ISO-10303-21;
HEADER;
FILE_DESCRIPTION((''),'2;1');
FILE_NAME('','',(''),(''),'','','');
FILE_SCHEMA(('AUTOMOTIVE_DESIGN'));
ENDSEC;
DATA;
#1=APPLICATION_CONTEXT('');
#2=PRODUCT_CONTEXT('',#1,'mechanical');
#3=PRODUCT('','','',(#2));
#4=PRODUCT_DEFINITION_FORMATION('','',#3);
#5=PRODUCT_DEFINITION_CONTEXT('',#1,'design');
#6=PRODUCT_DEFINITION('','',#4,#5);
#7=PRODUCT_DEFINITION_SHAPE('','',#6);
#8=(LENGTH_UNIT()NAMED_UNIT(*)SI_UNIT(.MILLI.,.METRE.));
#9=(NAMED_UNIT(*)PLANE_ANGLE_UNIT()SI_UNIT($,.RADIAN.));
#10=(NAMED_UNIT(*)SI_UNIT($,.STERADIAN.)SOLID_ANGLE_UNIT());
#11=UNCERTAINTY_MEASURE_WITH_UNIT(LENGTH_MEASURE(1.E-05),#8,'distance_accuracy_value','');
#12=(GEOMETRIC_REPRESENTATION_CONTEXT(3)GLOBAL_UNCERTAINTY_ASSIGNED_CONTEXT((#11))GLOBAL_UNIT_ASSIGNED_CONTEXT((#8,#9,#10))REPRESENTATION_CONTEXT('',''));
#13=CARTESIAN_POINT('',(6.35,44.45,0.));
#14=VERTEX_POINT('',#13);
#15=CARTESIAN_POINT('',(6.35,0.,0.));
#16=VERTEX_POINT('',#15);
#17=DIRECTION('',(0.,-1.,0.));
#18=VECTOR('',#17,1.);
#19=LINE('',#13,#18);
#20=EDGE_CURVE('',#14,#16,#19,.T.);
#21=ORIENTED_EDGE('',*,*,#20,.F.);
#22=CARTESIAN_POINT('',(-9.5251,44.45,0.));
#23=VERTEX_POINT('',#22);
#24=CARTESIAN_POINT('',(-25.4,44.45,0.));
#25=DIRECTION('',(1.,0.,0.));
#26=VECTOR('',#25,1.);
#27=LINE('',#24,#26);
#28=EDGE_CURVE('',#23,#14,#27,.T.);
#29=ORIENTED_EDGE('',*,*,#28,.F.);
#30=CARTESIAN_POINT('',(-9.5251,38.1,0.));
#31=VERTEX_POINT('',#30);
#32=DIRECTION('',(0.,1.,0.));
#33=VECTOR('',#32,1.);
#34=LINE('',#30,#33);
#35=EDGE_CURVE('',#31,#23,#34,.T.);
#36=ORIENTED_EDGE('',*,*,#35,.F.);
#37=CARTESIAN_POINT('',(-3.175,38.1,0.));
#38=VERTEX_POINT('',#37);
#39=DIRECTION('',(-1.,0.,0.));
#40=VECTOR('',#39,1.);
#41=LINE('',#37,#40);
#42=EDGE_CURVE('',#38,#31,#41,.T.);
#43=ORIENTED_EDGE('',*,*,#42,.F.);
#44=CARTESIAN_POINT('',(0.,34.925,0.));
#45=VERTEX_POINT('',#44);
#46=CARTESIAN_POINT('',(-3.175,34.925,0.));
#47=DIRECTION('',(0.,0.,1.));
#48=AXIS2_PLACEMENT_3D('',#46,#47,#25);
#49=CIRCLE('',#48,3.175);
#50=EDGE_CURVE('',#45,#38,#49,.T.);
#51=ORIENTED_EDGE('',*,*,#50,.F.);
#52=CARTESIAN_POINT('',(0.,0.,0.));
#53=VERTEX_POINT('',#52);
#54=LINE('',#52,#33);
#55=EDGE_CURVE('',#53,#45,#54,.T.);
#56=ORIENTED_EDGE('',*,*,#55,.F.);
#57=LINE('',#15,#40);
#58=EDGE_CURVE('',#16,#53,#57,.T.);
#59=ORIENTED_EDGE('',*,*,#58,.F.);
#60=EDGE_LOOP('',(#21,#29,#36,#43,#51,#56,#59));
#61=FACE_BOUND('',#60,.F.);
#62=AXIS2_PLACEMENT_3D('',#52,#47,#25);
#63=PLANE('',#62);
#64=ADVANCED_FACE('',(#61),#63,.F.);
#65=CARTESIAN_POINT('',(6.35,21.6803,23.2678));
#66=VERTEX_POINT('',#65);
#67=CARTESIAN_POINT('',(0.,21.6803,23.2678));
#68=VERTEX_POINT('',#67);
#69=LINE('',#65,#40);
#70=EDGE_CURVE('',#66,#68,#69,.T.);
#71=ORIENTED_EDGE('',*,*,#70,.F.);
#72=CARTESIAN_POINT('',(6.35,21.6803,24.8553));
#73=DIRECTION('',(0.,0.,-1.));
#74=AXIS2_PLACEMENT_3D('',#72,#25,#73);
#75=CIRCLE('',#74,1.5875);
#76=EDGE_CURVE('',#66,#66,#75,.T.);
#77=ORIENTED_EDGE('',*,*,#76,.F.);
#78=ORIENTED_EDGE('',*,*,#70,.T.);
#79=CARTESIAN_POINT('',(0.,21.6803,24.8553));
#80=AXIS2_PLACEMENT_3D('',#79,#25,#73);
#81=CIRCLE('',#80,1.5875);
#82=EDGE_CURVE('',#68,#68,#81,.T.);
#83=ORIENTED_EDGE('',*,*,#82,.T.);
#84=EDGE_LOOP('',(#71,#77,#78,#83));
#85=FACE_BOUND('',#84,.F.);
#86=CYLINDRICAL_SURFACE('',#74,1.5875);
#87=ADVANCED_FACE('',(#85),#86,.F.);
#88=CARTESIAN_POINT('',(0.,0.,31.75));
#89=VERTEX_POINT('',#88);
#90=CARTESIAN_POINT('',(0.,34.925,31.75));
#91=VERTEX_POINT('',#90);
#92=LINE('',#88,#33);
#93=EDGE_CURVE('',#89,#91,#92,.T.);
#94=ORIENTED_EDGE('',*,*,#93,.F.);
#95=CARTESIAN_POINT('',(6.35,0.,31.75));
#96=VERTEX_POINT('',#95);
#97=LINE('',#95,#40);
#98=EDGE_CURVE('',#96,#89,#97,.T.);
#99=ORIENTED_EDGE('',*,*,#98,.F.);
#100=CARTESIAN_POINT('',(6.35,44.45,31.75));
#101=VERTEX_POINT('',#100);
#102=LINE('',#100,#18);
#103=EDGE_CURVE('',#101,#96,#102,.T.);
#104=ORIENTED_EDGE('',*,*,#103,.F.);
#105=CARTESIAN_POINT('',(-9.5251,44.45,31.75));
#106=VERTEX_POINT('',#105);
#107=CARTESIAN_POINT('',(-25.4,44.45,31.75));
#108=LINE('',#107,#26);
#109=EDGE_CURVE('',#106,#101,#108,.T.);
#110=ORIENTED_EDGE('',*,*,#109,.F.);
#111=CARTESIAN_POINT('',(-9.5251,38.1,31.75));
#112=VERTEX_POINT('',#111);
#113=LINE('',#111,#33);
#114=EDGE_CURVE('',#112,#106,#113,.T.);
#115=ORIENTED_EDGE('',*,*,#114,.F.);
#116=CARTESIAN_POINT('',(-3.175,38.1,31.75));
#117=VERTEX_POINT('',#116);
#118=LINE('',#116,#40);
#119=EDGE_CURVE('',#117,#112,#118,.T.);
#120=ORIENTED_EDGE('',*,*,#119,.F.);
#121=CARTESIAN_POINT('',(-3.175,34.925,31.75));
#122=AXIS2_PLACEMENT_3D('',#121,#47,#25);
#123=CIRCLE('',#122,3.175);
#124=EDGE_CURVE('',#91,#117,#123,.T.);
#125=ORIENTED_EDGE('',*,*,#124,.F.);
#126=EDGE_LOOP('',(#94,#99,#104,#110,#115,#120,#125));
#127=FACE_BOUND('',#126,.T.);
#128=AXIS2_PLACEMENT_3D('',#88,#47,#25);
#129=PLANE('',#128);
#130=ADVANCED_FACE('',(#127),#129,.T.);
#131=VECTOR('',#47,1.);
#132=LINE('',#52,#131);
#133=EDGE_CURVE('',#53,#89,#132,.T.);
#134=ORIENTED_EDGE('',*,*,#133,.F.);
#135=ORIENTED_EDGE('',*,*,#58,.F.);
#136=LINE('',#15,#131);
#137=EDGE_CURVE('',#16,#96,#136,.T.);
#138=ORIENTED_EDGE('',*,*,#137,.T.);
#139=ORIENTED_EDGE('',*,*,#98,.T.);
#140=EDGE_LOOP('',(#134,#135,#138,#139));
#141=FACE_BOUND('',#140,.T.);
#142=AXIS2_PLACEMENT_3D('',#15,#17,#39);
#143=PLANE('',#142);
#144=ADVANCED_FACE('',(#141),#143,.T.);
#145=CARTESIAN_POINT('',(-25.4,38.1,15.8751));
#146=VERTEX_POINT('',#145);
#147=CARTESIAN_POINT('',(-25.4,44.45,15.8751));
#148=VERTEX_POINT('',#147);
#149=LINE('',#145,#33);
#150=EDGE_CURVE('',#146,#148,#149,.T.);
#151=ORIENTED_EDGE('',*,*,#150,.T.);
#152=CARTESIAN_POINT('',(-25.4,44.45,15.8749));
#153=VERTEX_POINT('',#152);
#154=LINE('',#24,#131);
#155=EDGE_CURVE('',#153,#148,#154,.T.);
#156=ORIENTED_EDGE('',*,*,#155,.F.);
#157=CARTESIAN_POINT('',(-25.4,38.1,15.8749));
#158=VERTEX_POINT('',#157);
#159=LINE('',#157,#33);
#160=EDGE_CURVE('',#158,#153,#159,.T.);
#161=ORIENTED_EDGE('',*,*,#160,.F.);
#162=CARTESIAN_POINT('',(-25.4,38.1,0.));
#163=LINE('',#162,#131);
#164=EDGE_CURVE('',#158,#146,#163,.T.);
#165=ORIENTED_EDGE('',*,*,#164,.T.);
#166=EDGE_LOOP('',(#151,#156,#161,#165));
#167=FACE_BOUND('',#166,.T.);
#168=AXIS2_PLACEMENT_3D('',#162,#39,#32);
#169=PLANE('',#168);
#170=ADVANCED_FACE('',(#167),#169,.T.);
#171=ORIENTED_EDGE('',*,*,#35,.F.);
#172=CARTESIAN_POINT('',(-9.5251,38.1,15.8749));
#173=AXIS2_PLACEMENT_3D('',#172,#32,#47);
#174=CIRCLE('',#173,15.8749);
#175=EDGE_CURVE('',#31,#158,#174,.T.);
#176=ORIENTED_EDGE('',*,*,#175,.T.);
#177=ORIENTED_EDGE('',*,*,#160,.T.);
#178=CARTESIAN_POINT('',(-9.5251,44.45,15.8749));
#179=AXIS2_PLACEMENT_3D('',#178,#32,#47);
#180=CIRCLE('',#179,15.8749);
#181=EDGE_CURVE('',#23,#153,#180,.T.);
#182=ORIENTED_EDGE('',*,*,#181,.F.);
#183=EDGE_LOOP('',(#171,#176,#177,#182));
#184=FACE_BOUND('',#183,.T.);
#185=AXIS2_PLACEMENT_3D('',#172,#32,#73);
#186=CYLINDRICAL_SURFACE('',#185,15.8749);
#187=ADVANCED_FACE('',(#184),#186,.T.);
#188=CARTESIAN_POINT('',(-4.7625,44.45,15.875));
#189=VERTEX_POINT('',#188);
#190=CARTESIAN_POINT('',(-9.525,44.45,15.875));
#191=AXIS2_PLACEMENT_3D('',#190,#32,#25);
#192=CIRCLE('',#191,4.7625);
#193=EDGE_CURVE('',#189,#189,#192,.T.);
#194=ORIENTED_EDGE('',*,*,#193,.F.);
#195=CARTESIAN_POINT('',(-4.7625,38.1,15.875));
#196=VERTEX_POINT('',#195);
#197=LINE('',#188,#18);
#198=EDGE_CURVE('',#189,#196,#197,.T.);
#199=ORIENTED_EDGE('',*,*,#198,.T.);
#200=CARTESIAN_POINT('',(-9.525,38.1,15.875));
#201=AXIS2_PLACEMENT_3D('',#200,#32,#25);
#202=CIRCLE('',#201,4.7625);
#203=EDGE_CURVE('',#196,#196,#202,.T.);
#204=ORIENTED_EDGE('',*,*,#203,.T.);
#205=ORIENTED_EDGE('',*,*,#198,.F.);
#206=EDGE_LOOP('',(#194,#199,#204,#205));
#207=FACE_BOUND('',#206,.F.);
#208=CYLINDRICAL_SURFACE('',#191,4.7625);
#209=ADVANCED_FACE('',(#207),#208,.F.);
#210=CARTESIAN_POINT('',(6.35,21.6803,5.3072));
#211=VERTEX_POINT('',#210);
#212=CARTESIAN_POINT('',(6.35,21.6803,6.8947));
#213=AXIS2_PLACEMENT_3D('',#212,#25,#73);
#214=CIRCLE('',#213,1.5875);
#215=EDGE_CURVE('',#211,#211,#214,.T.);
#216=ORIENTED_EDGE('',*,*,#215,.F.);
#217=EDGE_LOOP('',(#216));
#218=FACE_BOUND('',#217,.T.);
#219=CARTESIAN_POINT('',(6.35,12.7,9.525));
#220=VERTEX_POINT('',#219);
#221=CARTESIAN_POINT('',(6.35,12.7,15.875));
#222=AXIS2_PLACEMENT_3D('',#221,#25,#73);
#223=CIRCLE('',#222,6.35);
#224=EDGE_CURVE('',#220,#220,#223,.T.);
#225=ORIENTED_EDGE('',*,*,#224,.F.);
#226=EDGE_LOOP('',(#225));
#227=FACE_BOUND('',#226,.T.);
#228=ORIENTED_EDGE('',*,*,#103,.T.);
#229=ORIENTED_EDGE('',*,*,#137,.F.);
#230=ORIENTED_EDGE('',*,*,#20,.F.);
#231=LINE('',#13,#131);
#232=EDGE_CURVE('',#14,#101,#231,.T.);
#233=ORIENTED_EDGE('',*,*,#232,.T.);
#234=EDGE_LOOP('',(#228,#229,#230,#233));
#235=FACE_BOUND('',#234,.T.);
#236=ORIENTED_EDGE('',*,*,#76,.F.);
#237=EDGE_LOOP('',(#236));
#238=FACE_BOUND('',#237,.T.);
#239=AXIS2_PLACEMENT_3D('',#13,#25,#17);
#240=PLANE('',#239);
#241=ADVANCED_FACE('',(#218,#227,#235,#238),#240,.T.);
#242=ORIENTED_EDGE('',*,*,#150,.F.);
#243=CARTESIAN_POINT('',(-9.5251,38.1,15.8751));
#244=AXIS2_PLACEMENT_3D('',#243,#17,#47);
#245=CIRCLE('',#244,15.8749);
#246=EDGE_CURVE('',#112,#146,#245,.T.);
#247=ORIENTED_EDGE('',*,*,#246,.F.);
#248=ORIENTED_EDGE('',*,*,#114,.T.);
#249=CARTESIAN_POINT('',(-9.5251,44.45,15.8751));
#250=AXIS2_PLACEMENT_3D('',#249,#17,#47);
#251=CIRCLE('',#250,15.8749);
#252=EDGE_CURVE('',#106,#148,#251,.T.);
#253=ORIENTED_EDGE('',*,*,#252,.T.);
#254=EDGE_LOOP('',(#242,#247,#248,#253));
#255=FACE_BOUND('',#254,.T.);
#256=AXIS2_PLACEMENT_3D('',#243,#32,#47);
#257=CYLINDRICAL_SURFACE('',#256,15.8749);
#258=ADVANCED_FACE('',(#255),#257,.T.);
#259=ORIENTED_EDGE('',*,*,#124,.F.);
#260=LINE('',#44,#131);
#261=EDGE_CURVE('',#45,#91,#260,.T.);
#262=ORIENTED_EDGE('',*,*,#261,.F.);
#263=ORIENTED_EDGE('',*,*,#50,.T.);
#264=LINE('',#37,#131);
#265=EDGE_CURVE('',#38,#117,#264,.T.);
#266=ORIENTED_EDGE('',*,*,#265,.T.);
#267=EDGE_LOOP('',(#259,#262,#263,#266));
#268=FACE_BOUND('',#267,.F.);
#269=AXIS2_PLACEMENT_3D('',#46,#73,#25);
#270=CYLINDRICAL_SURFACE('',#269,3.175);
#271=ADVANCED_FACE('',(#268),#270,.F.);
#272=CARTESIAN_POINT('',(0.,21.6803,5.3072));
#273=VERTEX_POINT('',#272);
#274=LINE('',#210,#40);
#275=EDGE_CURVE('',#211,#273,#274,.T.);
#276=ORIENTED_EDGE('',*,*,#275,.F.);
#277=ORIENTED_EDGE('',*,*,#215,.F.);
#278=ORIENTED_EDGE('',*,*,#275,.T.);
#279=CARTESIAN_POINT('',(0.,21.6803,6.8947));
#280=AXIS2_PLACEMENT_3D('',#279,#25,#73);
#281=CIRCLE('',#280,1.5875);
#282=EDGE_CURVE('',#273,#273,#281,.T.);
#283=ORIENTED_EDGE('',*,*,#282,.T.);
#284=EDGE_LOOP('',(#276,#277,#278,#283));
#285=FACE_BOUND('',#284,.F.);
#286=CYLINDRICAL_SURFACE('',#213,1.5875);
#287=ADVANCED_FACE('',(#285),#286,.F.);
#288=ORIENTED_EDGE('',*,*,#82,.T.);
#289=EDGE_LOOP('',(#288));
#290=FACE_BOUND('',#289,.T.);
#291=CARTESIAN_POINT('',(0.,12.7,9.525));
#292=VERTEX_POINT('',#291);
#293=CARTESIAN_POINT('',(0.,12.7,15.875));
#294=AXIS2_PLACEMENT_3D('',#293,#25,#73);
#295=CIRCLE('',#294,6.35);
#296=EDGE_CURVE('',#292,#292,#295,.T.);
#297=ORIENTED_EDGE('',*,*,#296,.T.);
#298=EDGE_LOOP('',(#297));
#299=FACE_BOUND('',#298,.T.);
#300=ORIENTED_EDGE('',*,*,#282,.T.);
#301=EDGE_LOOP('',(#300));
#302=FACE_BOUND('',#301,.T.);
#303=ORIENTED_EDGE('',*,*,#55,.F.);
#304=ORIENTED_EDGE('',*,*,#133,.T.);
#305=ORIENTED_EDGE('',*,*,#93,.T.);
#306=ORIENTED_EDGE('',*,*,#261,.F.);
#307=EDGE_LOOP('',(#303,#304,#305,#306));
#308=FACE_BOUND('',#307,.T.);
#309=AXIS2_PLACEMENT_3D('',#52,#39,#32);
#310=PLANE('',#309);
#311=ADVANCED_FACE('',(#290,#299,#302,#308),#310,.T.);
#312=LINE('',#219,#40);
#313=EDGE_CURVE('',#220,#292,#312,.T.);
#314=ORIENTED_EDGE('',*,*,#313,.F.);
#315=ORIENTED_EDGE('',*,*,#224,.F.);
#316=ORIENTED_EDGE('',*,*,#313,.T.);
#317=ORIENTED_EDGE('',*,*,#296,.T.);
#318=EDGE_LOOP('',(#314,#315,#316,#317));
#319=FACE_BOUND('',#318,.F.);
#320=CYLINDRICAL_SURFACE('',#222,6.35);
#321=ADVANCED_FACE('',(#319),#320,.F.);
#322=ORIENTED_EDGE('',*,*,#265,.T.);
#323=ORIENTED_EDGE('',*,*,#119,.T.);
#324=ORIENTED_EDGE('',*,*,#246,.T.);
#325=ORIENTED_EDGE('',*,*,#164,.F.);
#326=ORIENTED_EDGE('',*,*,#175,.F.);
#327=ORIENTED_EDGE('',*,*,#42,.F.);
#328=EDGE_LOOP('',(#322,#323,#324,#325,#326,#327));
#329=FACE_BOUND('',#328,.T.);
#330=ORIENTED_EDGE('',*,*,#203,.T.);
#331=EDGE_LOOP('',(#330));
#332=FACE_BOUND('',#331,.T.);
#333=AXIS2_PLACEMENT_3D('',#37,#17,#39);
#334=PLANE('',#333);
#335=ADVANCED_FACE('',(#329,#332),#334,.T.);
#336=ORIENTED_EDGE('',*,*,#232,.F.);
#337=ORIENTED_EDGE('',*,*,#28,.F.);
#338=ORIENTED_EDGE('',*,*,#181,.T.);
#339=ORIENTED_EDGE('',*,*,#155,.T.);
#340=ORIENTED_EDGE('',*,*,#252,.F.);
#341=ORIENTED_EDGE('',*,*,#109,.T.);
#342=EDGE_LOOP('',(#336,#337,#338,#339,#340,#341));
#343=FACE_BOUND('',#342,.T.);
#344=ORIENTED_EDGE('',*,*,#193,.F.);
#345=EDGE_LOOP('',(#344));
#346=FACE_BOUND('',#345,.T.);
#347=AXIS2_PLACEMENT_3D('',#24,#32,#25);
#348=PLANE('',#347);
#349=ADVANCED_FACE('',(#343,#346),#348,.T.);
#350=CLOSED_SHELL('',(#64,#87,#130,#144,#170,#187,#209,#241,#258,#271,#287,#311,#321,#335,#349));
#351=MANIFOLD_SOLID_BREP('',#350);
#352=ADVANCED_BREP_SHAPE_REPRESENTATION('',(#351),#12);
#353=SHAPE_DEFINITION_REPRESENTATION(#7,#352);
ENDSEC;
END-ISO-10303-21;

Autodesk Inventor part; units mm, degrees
ref_plane "YZ Plane" through (0, 0, 0) normal (1, 0, 0) x (0, 1, 0)
ref_plane "XZ Plane" through (0, 0, 0) normal (0, 1, 0) x (-1, 0, 0)
ref_plane "XY Plane" through (0, 0, 0) normal (0, 0, 1) x (1, 0, 0)
sketch "Sketch1" plane through (0, 0, 0) normal (0, 0, 1) x (1, 0, 0)
  line L0 (0, 0) -> (0, 34.925)
  line L1 (-3.175, 38.1) -> (-25.4, 38.1)
  line L2 (-25.4, 38.1) -> (-25.4, 44.45)
  line L3 (-25.4, 44.45) -> (6.35, 44.45)
  line L4 (6.35, 44.45) -> (6.35, 0)
  line L5 (6.35, 0) -> (0, 0)
  arc A0 (0, 34.925) -> (-3.175, 38.1) centre (-3.175, 34.925) ccw
  point P0 (0, 38.1)
  dimension "d0" = 6.35
  dimension "d1" = 38.1
  dimension "d2" = 25.4
  dimension "d3" = 3.175
extrude "Extrusion1" add sketch "Sketch1" along normal blind 31.75
sketch "Sketch2" plane through (6.35, 0, 0) normal (1, 0, 0) x (0, 0, -1)
  line L0 (0, 38.1) -> (-31.75, 38.1) construction
  line L1 (0, 0) -> (-31.75, 0) construction
  line L2 (-15.875, 38.1) -> (-15.875, 0) construction
  line L3 (0, 0) -> (-31.75, 0) construction
  circle A0 centre (-15.875, 12.7) radius 6.35
  line L4 (0, 44.45) -> (-31.75, 44.45) construction
  line L5 (-15.875, 12.7) -> (-31.75, 28.575) construction
  line L6 (-31.75, 0) -> (-31.75, 44.45) construction
  circle A1 centre (-24.8553, 21.6803) radius 1.5875
  circle A2 centre (-6.8947, 21.6803) radius 1.5875
  dimension "d15" = 12.7
  dimension "d21" = 31.75
  dimension "d25" = 45
  dimension "d26" = 3.175
  dimension "d27" = 12.7
extrude "Extrusion2" cut sketch "Sketch2" against normal through all
sketch "Sketch3" plane through (-25.4, 44.45, 0) normal (0, 1, 0) x (1, 0, 0)
  line L0 (0, 0) -> (0, -31.75) construction
  line L1 (0, 0) -> (0, -31.75) construction
  line L2 (0, -15.875) -> (15.875, -15.875) construction
  circle A0 centre (15.875, -15.875) radius 4.7625
  dimension "d17" = 9.525
  dimension "d18" = 15.875
extrude "Extrusion3" cut sketch "Sketch3" against normal through all
fillet "Fillet1" radius 15.875 2 edges at (-25.4, 41.275, 31.75) (-25.4, 41.275, 0)
equation "\"d7\" = d6"
equation "\"d6\" = 9.525"
properties part number "Corner Hinge"
